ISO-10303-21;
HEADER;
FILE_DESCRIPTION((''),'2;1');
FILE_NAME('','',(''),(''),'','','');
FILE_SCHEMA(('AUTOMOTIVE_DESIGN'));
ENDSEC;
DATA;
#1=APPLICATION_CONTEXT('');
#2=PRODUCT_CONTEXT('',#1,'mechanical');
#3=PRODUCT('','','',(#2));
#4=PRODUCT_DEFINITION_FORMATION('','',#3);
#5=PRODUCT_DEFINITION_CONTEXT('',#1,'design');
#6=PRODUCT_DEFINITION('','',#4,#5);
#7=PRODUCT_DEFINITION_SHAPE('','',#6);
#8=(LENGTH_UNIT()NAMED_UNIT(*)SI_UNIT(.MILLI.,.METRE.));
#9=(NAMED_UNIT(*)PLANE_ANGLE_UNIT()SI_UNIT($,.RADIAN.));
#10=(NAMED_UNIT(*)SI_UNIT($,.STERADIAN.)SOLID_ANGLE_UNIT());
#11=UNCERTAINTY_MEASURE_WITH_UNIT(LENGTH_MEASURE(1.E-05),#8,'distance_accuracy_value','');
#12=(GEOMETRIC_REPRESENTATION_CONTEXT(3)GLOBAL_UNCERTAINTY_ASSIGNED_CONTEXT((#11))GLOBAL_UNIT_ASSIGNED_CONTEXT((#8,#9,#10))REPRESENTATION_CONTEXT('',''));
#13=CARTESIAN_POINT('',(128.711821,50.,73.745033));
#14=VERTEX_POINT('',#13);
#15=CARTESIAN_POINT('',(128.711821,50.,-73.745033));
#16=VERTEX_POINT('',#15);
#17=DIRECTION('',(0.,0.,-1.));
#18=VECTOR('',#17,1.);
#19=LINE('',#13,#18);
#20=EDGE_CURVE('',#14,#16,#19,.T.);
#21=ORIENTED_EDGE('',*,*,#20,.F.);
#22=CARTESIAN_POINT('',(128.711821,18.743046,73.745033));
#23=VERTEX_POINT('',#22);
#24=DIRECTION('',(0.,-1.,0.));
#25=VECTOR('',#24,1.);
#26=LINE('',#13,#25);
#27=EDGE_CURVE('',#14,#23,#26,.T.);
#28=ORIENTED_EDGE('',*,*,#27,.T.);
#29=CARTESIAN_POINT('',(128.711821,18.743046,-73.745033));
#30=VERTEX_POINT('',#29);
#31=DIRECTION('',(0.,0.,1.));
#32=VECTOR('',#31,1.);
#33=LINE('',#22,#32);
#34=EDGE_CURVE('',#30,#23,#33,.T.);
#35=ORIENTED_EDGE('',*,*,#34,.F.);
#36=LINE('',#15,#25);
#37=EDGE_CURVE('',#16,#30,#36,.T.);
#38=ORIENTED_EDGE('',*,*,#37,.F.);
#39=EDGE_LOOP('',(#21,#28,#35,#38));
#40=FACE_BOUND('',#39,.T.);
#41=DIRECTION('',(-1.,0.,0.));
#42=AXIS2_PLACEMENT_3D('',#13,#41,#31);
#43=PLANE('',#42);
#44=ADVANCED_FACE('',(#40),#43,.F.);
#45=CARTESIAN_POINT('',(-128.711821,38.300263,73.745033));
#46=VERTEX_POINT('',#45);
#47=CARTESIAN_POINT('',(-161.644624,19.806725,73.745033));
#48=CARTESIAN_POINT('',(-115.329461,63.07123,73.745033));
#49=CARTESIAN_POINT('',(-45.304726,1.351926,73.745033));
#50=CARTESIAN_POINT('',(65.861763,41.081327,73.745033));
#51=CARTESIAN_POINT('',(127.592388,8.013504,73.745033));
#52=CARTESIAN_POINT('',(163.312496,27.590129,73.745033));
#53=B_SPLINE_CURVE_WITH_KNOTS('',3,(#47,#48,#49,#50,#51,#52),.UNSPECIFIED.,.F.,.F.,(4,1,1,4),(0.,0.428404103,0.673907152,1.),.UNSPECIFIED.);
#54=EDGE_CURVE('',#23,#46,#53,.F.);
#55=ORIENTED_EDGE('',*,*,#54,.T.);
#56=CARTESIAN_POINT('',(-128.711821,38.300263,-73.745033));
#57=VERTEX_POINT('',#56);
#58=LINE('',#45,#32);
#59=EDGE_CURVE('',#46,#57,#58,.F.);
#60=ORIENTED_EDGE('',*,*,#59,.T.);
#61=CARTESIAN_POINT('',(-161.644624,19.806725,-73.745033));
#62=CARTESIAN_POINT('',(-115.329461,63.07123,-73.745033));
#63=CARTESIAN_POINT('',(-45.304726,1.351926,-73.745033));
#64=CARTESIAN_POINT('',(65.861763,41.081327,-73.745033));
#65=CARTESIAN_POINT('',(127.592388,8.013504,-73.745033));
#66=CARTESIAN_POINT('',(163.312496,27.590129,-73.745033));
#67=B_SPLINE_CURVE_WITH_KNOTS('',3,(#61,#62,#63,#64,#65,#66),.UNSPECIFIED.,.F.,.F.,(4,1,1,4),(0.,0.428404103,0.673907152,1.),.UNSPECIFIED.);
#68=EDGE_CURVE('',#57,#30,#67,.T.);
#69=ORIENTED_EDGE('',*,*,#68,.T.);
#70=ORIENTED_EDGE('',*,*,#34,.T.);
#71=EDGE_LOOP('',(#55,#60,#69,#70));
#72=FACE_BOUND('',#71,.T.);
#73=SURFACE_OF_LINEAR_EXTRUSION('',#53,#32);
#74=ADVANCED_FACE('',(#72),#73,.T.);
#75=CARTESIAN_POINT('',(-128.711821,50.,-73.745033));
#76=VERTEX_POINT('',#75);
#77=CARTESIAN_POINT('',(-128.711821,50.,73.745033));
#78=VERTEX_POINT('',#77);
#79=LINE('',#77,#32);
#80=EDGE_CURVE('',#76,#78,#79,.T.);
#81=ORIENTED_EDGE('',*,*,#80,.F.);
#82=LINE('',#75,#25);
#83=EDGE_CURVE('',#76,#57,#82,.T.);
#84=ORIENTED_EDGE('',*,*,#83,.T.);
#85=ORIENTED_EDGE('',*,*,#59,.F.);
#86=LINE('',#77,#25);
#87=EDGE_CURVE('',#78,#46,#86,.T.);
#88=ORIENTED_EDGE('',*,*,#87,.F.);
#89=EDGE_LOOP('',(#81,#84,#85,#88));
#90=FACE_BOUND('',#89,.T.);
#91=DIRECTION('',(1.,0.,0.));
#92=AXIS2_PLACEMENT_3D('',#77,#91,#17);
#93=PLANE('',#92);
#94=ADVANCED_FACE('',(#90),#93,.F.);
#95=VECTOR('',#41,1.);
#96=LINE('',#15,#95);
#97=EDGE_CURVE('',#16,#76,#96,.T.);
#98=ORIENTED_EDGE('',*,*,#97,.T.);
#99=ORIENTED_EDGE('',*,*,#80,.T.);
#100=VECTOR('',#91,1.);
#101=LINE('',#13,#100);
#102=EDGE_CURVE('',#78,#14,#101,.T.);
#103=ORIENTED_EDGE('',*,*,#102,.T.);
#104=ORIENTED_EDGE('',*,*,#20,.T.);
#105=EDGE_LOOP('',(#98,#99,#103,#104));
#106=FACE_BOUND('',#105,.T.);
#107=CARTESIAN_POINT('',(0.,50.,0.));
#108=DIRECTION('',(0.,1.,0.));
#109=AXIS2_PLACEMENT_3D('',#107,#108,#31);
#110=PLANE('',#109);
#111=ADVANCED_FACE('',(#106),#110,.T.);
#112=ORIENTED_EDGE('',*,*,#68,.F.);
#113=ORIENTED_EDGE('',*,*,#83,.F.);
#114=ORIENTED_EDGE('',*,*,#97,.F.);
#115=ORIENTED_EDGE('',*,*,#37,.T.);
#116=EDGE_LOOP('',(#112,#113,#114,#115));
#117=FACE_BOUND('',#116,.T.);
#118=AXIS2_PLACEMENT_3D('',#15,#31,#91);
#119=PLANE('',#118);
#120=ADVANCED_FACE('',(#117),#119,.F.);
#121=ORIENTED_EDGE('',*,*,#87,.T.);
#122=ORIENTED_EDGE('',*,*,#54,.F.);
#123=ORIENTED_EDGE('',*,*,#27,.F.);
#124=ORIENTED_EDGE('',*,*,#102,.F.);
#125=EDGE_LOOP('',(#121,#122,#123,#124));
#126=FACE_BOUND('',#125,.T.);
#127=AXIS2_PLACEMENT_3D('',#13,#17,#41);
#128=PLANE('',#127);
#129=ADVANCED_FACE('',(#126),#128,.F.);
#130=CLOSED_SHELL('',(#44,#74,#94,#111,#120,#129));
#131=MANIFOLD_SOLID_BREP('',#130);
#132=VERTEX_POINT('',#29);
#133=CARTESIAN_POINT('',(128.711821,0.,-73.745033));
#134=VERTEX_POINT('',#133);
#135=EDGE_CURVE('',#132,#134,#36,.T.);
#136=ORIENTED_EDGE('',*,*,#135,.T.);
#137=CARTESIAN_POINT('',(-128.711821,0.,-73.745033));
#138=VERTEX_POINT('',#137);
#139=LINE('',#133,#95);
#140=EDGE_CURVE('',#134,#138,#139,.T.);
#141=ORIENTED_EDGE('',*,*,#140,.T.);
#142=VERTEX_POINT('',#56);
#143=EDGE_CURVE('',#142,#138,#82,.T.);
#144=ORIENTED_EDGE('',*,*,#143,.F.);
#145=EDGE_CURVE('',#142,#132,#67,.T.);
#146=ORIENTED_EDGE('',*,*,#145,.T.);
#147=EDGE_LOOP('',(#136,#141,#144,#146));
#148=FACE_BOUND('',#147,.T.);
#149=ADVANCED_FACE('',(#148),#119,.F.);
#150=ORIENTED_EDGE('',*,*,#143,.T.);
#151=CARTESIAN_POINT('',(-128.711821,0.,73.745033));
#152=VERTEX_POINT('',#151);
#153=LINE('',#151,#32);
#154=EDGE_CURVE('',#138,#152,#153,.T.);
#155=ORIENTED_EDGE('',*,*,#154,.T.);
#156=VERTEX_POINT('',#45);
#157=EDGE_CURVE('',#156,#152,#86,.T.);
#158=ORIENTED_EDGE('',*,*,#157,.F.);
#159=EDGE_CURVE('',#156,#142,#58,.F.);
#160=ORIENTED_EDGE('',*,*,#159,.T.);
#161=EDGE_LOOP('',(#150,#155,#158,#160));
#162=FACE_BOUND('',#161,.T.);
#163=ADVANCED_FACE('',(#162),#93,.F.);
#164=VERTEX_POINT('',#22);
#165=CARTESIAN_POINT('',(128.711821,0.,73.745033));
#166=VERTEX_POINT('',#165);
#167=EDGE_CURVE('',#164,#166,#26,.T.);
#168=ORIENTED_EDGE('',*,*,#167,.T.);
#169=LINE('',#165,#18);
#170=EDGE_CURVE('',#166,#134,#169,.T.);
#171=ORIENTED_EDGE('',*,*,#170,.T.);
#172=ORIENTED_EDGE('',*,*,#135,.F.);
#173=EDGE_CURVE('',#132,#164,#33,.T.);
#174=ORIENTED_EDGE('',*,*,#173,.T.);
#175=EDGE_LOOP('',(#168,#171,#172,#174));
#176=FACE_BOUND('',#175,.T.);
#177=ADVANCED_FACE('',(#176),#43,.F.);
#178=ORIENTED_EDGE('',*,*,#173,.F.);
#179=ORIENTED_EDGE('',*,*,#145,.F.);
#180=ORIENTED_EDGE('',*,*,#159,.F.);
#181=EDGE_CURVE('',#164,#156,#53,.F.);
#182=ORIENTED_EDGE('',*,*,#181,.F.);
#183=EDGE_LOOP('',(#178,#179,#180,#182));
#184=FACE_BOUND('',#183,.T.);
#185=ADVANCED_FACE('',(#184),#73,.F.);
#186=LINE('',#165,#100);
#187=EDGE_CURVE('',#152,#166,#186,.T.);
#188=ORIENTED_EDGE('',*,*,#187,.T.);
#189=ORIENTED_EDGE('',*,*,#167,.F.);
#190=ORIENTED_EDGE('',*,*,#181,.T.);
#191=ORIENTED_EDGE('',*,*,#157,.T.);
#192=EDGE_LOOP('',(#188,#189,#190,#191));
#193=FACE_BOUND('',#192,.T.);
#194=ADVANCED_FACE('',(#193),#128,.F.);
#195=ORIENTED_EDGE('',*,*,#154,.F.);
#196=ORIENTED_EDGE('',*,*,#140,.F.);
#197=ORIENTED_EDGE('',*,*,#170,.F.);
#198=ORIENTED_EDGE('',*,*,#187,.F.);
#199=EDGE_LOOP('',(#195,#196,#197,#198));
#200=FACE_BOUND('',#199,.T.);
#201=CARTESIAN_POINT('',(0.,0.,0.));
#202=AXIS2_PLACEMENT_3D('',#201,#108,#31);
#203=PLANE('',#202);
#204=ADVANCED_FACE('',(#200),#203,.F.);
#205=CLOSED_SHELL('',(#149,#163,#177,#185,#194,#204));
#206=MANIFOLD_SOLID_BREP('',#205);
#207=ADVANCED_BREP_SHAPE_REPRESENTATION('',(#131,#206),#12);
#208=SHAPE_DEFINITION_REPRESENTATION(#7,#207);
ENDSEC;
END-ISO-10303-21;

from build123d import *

# Parameters (mm, degrees)
SKETCH1_W           = 257.423641252
SKETCH1_H           = 147.49006692
BOSS_EXTRUDE1_DEPTH = 50
INTERSECT1_START    = -73.74503346
INTERSECT1_DEPTH    = 147.49006692
INTERSECT1_2_DEPTH  = 147.49006692


# Read off the part's stored shape, not the designer's step: Intersect1
with BuildPart() as part:
    # Sketch1 → Boss-Extrude1 (new body)
    with BuildSketch(Plane(origin=(0, 0, 0), x_dir=(1, 0, 0), z_dir=(0, 1, 0))):
        Rectangle(SKETCH1_W, SKETCH1_H)
    extrude(amount=BOSS_EXTRUDE1_DEPTH)

    # Intersect1 outline → Intersect1 (cut)
    with BuildSketch(Plane.XY.offset(INTERSECT1_START)):
        with BuildLine():
            add(Edge.make_bspline(
                [(-128.711820626, 38.300263387), (-93.95042027, 46.3677643), (-33.928882118, 5.417498568), (54.115890209, 36.883510422), (104.708521915, 18.332859687), (128.711820626, 18.743046177)],
                knots=[0.102331594, 0.102331594, 0.102331594, 0.102331594, 0.428404103, 0.673907152, 0.894339808, 0.894339808, 0.894339808, 0.894339808], degree=3))
            Line((-128.711820626, 38.300263387), (-128.711820626, 0))
            Line((-128.711820626, 0), (128.711820626, 0))
            Line((128.711820626, 0), (128.711820626, 18.743046177))
        make_face()
    extrude(amount=INTERSECT1_DEPTH, mode=Mode.SUBTRACT)


with BuildPart() as body_2:
    # Intersect1 2 outline → Intersect1 2 (new body)
    with BuildSketch(Plane.XY.offset(INTERSECT1_START)):
        with BuildLine():
            add(Edge.make_bspline(
                [(-128.711820626, 38.300263387), (-93.95042027, 46.3677643), (-33.928882118, 5.417498568), (54.115890209, 36.883510422), (104.708521915, 18.332859687), (128.711820626, 18.743046177)],
                knots=[0.102331594, 0.102331594, 0.102331594, 0.102331594, 0.428404103, 0.673907152, 0.894339808, 0.894339808, 0.894339808, 0.894339808], degree=3))
            Line((-128.711820626, 38.300263387), (-128.711820626, 0))
            Line((-128.711820626, 0), (128.711820626, 0))
            Line((128.711820626, 0), (128.711820626, 18.743046177))
        make_face()
    extrude(amount=INTERSECT1_2_DEPTH)


solid = Compound([part.part, body_2.part])
